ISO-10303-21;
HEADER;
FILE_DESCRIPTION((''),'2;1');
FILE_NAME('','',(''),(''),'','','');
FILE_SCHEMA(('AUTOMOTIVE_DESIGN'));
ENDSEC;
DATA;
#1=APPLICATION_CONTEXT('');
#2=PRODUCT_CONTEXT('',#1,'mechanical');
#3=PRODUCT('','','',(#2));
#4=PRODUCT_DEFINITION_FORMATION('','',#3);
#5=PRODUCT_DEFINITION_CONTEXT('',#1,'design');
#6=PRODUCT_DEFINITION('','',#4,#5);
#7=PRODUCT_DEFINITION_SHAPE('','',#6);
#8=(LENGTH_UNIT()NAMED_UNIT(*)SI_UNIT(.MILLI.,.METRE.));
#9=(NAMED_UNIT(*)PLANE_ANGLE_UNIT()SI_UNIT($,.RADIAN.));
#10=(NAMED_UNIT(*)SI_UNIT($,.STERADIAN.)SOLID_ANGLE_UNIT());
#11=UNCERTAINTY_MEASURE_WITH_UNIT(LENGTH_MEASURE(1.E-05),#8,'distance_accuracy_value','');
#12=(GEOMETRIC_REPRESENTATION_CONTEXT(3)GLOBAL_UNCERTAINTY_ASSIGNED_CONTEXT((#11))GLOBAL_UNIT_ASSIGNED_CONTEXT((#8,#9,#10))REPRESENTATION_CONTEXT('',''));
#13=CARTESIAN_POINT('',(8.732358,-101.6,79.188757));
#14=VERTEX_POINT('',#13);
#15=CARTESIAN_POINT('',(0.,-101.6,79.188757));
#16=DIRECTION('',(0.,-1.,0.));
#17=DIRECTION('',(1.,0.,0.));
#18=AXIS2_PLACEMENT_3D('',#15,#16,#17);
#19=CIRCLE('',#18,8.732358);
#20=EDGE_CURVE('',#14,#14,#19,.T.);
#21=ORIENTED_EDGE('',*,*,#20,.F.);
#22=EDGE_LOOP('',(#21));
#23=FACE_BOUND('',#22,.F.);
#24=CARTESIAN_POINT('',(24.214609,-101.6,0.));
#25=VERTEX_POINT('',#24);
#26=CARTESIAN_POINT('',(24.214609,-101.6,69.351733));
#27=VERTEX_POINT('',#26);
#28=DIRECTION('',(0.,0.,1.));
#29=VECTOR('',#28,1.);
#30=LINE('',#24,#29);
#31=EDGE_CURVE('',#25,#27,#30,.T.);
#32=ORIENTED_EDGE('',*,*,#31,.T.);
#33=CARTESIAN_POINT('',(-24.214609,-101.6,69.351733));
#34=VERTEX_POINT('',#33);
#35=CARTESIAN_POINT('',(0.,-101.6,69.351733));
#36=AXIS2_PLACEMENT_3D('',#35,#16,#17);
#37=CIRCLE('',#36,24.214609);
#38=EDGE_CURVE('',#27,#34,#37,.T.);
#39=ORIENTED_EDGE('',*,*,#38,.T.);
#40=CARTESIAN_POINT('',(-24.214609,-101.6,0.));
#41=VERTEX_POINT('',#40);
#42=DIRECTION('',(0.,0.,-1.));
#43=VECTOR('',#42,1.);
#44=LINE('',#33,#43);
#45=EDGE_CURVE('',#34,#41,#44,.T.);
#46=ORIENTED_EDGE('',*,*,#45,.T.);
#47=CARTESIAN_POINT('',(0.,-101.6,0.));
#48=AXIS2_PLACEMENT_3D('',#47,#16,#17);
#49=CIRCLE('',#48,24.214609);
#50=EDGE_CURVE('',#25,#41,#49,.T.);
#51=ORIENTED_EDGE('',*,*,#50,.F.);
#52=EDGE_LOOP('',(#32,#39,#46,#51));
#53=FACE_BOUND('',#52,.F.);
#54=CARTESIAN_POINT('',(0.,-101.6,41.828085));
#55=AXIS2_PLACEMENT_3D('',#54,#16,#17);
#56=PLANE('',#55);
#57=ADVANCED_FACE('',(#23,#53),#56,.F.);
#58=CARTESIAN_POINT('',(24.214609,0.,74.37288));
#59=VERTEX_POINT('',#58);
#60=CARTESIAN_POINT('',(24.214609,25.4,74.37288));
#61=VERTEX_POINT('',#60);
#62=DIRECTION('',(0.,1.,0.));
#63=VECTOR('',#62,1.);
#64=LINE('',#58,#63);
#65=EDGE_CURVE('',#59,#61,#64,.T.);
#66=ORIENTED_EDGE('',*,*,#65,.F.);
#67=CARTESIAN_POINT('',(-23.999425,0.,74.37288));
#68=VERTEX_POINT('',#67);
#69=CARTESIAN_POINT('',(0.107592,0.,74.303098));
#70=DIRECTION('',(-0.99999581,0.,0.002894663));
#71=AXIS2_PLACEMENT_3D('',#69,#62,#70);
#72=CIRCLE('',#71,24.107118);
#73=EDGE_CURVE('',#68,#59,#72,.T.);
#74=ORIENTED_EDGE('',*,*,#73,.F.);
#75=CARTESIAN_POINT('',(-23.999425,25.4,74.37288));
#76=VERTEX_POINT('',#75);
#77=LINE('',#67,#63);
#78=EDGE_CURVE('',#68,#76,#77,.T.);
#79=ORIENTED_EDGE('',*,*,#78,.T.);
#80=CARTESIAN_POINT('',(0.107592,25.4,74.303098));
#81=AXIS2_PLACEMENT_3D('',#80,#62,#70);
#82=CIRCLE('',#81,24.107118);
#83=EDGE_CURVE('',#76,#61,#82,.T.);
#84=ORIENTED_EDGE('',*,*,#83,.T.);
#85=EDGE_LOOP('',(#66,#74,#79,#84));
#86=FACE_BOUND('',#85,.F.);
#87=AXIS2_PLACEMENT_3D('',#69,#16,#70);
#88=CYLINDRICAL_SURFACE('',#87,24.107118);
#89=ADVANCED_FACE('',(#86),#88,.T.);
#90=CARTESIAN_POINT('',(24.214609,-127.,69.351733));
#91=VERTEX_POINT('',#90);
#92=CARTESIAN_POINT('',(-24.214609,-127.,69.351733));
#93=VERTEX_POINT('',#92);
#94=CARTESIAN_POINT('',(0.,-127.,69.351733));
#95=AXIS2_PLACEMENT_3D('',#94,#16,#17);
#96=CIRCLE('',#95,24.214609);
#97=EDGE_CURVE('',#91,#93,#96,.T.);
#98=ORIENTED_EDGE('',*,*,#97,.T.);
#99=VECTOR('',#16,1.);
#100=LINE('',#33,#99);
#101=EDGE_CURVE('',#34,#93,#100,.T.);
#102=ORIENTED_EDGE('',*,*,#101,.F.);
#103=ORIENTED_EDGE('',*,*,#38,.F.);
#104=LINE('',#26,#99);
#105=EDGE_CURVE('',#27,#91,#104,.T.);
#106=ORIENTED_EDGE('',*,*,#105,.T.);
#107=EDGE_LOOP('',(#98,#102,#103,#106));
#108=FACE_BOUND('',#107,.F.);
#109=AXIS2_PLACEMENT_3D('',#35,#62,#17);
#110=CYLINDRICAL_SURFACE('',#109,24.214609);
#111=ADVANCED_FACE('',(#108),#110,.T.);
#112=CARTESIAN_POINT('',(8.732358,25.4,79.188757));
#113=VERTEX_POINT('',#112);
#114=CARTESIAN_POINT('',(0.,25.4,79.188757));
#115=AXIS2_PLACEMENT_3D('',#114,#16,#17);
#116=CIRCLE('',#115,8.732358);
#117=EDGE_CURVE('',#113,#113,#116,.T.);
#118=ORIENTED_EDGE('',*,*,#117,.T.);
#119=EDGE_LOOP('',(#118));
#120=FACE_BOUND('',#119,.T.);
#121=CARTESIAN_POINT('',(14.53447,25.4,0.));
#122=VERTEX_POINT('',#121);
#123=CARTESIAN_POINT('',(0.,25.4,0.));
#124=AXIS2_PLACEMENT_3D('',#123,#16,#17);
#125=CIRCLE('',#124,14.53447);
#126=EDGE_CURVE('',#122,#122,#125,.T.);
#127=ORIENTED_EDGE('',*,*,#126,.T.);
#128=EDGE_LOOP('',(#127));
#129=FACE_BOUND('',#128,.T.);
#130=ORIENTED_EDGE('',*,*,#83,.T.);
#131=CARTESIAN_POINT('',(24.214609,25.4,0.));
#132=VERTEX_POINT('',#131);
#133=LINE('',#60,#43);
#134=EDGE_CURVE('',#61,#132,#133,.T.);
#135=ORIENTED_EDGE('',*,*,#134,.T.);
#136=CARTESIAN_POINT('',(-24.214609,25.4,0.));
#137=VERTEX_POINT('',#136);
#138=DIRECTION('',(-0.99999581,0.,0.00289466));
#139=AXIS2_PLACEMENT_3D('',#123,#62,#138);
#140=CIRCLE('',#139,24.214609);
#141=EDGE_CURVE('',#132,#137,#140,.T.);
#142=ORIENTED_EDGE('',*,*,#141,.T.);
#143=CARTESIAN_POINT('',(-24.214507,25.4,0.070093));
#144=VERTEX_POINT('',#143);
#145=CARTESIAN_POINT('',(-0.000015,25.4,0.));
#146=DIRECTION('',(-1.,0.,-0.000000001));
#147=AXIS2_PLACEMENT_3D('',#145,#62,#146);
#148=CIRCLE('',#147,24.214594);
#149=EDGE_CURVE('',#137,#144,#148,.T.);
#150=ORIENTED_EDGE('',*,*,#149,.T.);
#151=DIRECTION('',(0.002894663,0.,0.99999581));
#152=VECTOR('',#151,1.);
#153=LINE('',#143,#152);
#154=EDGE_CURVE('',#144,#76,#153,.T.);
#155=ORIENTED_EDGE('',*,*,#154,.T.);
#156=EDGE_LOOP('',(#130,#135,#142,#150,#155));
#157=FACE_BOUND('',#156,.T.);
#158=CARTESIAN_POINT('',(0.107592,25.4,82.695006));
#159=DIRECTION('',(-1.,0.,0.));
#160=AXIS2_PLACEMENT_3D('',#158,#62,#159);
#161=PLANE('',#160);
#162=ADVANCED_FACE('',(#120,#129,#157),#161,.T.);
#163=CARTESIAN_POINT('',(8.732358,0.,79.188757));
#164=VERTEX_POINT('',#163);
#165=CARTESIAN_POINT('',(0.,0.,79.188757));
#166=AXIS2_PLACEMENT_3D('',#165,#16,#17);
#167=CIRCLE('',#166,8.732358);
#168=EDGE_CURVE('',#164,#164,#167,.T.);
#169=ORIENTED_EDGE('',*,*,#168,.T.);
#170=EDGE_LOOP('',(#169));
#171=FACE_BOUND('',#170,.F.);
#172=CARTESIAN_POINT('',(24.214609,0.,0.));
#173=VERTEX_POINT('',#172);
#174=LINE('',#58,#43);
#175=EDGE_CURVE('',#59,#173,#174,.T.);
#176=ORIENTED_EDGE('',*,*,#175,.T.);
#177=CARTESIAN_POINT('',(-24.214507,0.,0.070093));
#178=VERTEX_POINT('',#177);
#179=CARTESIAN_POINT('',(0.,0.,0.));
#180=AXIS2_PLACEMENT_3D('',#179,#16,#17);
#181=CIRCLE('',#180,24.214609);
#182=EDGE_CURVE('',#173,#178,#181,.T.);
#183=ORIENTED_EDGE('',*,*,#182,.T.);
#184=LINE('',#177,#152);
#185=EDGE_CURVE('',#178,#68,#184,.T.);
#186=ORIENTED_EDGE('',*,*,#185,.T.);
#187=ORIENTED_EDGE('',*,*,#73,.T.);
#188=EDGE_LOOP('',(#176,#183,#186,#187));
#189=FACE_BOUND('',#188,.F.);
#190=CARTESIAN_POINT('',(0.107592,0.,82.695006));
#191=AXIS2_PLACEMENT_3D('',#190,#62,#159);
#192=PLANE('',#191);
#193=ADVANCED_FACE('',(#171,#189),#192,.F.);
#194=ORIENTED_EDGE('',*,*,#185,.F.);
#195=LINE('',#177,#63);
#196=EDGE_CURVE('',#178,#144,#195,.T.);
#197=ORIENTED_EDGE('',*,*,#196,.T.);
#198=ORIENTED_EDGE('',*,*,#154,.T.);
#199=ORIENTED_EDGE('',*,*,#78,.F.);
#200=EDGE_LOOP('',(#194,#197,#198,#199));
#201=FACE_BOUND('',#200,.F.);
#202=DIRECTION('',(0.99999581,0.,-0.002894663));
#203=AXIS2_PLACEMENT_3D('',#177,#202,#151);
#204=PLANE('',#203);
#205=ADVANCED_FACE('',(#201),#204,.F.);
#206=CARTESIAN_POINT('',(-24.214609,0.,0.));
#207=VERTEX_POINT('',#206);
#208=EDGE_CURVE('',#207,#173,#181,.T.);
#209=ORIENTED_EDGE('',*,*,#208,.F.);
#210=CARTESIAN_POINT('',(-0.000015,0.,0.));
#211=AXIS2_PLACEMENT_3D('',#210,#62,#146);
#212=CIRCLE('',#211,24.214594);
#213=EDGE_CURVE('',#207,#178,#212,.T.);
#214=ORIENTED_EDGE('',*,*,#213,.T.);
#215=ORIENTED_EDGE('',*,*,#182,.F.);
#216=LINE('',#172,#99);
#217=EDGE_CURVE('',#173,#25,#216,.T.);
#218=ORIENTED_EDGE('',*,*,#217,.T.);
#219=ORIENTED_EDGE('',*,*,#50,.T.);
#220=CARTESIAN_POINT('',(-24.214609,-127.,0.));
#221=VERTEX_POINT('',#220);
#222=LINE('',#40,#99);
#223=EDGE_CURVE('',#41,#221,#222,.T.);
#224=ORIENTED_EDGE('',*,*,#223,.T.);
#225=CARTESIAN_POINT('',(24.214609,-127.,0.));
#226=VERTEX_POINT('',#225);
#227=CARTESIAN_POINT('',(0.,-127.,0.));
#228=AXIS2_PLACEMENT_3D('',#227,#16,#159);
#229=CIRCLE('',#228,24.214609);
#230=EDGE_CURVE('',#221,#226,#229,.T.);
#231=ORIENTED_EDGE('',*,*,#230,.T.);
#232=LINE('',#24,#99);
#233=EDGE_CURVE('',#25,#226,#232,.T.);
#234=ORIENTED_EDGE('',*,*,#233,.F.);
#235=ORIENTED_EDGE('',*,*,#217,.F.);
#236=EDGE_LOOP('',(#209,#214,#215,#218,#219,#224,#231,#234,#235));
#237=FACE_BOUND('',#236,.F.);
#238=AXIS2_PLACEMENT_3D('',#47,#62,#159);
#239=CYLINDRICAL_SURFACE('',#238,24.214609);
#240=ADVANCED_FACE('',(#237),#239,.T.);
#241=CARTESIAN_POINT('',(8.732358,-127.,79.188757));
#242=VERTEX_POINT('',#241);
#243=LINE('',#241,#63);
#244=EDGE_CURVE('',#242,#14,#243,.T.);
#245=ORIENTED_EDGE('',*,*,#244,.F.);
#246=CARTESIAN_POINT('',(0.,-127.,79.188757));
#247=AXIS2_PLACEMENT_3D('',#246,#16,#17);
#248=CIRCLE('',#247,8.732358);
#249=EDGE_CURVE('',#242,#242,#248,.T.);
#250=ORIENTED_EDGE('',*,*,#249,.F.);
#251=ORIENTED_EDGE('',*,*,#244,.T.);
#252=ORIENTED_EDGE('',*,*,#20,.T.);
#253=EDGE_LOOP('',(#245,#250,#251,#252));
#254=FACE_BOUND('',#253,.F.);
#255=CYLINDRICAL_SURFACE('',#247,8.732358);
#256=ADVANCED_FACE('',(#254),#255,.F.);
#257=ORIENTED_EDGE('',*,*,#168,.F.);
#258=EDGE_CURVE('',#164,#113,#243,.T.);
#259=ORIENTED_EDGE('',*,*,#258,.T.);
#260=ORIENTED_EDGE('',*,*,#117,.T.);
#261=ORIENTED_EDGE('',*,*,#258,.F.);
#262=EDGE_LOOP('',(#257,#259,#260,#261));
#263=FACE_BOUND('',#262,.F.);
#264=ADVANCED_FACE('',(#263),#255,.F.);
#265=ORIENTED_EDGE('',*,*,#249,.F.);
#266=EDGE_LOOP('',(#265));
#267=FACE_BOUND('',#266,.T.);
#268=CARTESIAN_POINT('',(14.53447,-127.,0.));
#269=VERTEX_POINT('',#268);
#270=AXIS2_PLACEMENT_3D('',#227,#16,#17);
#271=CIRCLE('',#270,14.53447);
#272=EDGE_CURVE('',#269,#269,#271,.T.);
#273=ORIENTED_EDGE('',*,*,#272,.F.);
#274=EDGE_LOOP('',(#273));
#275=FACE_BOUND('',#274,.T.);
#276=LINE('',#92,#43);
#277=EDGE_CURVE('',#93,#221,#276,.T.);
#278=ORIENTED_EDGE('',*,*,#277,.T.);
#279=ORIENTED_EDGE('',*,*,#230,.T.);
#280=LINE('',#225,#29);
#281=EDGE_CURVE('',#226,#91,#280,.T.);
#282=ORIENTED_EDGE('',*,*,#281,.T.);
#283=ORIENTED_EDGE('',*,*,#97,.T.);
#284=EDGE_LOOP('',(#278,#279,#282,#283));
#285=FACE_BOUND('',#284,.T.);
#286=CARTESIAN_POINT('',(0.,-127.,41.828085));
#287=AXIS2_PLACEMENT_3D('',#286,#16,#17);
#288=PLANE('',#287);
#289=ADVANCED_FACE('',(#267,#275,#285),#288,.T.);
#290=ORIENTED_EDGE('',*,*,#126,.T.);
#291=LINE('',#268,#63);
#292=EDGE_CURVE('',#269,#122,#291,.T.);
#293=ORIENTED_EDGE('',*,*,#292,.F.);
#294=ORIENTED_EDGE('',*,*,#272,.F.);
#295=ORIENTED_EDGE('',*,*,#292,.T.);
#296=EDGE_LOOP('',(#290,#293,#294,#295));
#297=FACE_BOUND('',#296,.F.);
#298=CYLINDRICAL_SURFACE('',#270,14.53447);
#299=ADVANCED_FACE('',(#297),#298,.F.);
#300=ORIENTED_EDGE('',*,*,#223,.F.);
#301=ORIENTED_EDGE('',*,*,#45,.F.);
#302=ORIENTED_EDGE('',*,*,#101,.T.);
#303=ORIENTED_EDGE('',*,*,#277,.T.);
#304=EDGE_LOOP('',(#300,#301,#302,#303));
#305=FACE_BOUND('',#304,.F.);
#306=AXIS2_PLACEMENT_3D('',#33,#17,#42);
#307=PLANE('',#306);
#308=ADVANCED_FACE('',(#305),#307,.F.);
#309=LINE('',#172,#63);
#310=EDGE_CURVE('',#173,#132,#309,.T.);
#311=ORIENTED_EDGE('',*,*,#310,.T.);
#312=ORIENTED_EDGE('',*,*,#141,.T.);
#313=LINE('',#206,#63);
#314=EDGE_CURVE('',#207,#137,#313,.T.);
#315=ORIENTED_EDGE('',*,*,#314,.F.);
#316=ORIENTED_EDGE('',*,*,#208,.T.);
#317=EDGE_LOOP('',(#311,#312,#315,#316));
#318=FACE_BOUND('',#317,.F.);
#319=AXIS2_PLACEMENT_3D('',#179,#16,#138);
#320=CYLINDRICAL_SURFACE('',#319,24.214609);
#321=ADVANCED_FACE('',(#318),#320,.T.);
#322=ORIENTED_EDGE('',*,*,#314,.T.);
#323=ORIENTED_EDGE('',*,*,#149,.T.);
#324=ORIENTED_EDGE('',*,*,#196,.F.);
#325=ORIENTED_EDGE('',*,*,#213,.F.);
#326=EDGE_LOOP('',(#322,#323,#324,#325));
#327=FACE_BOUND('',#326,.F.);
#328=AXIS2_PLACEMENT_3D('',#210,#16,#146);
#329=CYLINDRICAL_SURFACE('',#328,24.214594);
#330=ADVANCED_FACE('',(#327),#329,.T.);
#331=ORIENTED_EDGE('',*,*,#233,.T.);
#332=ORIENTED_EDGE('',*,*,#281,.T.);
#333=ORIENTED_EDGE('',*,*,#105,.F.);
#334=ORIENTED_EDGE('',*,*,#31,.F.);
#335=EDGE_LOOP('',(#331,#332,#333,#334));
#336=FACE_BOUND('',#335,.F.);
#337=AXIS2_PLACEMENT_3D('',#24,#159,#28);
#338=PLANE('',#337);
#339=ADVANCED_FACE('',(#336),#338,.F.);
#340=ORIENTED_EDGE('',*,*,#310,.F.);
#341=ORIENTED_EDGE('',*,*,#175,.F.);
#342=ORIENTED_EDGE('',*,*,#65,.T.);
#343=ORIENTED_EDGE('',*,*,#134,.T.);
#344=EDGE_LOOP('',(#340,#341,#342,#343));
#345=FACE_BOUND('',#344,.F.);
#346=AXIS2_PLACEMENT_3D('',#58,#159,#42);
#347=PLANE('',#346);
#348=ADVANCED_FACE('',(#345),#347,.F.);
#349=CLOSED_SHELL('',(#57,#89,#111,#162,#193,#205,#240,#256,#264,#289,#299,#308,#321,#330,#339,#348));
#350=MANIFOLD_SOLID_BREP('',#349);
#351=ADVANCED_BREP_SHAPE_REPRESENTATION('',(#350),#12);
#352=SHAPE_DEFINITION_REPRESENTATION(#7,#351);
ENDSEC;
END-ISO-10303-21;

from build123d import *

# Parameters (mm, degrees)
F0_R     = 24.2146085631
F1_DEPTH = 101.6
F3_DEPTH = 25.4
F5_DEPTH = 25.4
F6_R     = 8.7323577449
F6_R_2   = 14.5344701606
F7_DEPTH = 254


with BuildPart() as f1:
    # F0 (on Front) → F1 (new body)
    with BuildSketch(Plane.XZ):
        Circle(F0_R)
    extrude(amount=F1_DEPTH)

    # F2 (on face) → F3 (join)
    with BuildSketch(Plane.XZ.offset(101.6)):
        with BuildLine():
            Line((-24.2146085631, 69.3517327309), (-24.2146085631, 0))
            ThreePointArc((-24.2146085631, 0), (0, 24.2146085631), (24.2146085631, 0))
            Line((24.2146085631, 0), (24.2146085631, 69.3517327309))
            ThreePointArc((24.2146085631, 69.3517327309), (0, 93.5663412939), (-24.2146085631, 69.3517327309))
        make_face()
        with BuildLine():
            ThreePointArc((24.2146085631, 0), (0, 24.2146085631), (-24.2146085631, 0))
            ThreePointArc((-24.2146085631, 0), (0, -24.2146085631), (24.2146085631, 0))
        make_face()
    extrude(amount=F3_DEPTH)

    # F4 (on face) → F5 (join)
    with BuildSketch(Plane(origin=(0, 0, 0), x_dir=(-1, 0, 0), z_dir=(0, 1, 0))):
        with BuildLine():
            ThreePointArc((23.9994246513, 74.3728801608), (-0.1075919559, 98.4102157735), (-24.2146085631, 74.3728801608))
            Line((-24.2146085631, 74.3728801608), (23.9994246513, 74.3728801608))
        make_face()
        with BuildLine():
            Line((-24.2146085631, 74.3728801608), (-24.2146085631, 0))
            ThreePointArc((-24.2146085631, 0), (-0.0350465649, 24.2145832011), (24.2145071151, 0.0700930563))
            Line((24.2145071151, 0.0700930563), (23.9994246513, 74.3728801608))
            Line((23.9994246513, 74.3728801608), (-24.2146085631, 74.3728801608))
        make_face()
        with BuildLine():
            ThreePointArc((24.2145071151, 0.0700930563), (-0.0350465649, 24.2145832011), (-24.2146085631, 0))
            ThreePointArc((-24.2146085631, 0), (0, -24.2146085631), (24.2146085631, 0))
            ThreePointArc((24.2146085631, 0), (24.2145832011, 0.0350465649), (24.2145071151, 0.0700930563))
        make_face()
    extrude(amount=F5_DEPTH)

    # F6 (on face) → F7 (cut)
    with BuildSketch(Plane.XZ.offset(127)):
        with Locations((0, 79.1887566447)):
            Circle(F6_R)
        Circle(F6_R_2)
    extrude(amount=-F7_DEPTH, mode=Mode.SUBTRACT)


solid = f1.part
